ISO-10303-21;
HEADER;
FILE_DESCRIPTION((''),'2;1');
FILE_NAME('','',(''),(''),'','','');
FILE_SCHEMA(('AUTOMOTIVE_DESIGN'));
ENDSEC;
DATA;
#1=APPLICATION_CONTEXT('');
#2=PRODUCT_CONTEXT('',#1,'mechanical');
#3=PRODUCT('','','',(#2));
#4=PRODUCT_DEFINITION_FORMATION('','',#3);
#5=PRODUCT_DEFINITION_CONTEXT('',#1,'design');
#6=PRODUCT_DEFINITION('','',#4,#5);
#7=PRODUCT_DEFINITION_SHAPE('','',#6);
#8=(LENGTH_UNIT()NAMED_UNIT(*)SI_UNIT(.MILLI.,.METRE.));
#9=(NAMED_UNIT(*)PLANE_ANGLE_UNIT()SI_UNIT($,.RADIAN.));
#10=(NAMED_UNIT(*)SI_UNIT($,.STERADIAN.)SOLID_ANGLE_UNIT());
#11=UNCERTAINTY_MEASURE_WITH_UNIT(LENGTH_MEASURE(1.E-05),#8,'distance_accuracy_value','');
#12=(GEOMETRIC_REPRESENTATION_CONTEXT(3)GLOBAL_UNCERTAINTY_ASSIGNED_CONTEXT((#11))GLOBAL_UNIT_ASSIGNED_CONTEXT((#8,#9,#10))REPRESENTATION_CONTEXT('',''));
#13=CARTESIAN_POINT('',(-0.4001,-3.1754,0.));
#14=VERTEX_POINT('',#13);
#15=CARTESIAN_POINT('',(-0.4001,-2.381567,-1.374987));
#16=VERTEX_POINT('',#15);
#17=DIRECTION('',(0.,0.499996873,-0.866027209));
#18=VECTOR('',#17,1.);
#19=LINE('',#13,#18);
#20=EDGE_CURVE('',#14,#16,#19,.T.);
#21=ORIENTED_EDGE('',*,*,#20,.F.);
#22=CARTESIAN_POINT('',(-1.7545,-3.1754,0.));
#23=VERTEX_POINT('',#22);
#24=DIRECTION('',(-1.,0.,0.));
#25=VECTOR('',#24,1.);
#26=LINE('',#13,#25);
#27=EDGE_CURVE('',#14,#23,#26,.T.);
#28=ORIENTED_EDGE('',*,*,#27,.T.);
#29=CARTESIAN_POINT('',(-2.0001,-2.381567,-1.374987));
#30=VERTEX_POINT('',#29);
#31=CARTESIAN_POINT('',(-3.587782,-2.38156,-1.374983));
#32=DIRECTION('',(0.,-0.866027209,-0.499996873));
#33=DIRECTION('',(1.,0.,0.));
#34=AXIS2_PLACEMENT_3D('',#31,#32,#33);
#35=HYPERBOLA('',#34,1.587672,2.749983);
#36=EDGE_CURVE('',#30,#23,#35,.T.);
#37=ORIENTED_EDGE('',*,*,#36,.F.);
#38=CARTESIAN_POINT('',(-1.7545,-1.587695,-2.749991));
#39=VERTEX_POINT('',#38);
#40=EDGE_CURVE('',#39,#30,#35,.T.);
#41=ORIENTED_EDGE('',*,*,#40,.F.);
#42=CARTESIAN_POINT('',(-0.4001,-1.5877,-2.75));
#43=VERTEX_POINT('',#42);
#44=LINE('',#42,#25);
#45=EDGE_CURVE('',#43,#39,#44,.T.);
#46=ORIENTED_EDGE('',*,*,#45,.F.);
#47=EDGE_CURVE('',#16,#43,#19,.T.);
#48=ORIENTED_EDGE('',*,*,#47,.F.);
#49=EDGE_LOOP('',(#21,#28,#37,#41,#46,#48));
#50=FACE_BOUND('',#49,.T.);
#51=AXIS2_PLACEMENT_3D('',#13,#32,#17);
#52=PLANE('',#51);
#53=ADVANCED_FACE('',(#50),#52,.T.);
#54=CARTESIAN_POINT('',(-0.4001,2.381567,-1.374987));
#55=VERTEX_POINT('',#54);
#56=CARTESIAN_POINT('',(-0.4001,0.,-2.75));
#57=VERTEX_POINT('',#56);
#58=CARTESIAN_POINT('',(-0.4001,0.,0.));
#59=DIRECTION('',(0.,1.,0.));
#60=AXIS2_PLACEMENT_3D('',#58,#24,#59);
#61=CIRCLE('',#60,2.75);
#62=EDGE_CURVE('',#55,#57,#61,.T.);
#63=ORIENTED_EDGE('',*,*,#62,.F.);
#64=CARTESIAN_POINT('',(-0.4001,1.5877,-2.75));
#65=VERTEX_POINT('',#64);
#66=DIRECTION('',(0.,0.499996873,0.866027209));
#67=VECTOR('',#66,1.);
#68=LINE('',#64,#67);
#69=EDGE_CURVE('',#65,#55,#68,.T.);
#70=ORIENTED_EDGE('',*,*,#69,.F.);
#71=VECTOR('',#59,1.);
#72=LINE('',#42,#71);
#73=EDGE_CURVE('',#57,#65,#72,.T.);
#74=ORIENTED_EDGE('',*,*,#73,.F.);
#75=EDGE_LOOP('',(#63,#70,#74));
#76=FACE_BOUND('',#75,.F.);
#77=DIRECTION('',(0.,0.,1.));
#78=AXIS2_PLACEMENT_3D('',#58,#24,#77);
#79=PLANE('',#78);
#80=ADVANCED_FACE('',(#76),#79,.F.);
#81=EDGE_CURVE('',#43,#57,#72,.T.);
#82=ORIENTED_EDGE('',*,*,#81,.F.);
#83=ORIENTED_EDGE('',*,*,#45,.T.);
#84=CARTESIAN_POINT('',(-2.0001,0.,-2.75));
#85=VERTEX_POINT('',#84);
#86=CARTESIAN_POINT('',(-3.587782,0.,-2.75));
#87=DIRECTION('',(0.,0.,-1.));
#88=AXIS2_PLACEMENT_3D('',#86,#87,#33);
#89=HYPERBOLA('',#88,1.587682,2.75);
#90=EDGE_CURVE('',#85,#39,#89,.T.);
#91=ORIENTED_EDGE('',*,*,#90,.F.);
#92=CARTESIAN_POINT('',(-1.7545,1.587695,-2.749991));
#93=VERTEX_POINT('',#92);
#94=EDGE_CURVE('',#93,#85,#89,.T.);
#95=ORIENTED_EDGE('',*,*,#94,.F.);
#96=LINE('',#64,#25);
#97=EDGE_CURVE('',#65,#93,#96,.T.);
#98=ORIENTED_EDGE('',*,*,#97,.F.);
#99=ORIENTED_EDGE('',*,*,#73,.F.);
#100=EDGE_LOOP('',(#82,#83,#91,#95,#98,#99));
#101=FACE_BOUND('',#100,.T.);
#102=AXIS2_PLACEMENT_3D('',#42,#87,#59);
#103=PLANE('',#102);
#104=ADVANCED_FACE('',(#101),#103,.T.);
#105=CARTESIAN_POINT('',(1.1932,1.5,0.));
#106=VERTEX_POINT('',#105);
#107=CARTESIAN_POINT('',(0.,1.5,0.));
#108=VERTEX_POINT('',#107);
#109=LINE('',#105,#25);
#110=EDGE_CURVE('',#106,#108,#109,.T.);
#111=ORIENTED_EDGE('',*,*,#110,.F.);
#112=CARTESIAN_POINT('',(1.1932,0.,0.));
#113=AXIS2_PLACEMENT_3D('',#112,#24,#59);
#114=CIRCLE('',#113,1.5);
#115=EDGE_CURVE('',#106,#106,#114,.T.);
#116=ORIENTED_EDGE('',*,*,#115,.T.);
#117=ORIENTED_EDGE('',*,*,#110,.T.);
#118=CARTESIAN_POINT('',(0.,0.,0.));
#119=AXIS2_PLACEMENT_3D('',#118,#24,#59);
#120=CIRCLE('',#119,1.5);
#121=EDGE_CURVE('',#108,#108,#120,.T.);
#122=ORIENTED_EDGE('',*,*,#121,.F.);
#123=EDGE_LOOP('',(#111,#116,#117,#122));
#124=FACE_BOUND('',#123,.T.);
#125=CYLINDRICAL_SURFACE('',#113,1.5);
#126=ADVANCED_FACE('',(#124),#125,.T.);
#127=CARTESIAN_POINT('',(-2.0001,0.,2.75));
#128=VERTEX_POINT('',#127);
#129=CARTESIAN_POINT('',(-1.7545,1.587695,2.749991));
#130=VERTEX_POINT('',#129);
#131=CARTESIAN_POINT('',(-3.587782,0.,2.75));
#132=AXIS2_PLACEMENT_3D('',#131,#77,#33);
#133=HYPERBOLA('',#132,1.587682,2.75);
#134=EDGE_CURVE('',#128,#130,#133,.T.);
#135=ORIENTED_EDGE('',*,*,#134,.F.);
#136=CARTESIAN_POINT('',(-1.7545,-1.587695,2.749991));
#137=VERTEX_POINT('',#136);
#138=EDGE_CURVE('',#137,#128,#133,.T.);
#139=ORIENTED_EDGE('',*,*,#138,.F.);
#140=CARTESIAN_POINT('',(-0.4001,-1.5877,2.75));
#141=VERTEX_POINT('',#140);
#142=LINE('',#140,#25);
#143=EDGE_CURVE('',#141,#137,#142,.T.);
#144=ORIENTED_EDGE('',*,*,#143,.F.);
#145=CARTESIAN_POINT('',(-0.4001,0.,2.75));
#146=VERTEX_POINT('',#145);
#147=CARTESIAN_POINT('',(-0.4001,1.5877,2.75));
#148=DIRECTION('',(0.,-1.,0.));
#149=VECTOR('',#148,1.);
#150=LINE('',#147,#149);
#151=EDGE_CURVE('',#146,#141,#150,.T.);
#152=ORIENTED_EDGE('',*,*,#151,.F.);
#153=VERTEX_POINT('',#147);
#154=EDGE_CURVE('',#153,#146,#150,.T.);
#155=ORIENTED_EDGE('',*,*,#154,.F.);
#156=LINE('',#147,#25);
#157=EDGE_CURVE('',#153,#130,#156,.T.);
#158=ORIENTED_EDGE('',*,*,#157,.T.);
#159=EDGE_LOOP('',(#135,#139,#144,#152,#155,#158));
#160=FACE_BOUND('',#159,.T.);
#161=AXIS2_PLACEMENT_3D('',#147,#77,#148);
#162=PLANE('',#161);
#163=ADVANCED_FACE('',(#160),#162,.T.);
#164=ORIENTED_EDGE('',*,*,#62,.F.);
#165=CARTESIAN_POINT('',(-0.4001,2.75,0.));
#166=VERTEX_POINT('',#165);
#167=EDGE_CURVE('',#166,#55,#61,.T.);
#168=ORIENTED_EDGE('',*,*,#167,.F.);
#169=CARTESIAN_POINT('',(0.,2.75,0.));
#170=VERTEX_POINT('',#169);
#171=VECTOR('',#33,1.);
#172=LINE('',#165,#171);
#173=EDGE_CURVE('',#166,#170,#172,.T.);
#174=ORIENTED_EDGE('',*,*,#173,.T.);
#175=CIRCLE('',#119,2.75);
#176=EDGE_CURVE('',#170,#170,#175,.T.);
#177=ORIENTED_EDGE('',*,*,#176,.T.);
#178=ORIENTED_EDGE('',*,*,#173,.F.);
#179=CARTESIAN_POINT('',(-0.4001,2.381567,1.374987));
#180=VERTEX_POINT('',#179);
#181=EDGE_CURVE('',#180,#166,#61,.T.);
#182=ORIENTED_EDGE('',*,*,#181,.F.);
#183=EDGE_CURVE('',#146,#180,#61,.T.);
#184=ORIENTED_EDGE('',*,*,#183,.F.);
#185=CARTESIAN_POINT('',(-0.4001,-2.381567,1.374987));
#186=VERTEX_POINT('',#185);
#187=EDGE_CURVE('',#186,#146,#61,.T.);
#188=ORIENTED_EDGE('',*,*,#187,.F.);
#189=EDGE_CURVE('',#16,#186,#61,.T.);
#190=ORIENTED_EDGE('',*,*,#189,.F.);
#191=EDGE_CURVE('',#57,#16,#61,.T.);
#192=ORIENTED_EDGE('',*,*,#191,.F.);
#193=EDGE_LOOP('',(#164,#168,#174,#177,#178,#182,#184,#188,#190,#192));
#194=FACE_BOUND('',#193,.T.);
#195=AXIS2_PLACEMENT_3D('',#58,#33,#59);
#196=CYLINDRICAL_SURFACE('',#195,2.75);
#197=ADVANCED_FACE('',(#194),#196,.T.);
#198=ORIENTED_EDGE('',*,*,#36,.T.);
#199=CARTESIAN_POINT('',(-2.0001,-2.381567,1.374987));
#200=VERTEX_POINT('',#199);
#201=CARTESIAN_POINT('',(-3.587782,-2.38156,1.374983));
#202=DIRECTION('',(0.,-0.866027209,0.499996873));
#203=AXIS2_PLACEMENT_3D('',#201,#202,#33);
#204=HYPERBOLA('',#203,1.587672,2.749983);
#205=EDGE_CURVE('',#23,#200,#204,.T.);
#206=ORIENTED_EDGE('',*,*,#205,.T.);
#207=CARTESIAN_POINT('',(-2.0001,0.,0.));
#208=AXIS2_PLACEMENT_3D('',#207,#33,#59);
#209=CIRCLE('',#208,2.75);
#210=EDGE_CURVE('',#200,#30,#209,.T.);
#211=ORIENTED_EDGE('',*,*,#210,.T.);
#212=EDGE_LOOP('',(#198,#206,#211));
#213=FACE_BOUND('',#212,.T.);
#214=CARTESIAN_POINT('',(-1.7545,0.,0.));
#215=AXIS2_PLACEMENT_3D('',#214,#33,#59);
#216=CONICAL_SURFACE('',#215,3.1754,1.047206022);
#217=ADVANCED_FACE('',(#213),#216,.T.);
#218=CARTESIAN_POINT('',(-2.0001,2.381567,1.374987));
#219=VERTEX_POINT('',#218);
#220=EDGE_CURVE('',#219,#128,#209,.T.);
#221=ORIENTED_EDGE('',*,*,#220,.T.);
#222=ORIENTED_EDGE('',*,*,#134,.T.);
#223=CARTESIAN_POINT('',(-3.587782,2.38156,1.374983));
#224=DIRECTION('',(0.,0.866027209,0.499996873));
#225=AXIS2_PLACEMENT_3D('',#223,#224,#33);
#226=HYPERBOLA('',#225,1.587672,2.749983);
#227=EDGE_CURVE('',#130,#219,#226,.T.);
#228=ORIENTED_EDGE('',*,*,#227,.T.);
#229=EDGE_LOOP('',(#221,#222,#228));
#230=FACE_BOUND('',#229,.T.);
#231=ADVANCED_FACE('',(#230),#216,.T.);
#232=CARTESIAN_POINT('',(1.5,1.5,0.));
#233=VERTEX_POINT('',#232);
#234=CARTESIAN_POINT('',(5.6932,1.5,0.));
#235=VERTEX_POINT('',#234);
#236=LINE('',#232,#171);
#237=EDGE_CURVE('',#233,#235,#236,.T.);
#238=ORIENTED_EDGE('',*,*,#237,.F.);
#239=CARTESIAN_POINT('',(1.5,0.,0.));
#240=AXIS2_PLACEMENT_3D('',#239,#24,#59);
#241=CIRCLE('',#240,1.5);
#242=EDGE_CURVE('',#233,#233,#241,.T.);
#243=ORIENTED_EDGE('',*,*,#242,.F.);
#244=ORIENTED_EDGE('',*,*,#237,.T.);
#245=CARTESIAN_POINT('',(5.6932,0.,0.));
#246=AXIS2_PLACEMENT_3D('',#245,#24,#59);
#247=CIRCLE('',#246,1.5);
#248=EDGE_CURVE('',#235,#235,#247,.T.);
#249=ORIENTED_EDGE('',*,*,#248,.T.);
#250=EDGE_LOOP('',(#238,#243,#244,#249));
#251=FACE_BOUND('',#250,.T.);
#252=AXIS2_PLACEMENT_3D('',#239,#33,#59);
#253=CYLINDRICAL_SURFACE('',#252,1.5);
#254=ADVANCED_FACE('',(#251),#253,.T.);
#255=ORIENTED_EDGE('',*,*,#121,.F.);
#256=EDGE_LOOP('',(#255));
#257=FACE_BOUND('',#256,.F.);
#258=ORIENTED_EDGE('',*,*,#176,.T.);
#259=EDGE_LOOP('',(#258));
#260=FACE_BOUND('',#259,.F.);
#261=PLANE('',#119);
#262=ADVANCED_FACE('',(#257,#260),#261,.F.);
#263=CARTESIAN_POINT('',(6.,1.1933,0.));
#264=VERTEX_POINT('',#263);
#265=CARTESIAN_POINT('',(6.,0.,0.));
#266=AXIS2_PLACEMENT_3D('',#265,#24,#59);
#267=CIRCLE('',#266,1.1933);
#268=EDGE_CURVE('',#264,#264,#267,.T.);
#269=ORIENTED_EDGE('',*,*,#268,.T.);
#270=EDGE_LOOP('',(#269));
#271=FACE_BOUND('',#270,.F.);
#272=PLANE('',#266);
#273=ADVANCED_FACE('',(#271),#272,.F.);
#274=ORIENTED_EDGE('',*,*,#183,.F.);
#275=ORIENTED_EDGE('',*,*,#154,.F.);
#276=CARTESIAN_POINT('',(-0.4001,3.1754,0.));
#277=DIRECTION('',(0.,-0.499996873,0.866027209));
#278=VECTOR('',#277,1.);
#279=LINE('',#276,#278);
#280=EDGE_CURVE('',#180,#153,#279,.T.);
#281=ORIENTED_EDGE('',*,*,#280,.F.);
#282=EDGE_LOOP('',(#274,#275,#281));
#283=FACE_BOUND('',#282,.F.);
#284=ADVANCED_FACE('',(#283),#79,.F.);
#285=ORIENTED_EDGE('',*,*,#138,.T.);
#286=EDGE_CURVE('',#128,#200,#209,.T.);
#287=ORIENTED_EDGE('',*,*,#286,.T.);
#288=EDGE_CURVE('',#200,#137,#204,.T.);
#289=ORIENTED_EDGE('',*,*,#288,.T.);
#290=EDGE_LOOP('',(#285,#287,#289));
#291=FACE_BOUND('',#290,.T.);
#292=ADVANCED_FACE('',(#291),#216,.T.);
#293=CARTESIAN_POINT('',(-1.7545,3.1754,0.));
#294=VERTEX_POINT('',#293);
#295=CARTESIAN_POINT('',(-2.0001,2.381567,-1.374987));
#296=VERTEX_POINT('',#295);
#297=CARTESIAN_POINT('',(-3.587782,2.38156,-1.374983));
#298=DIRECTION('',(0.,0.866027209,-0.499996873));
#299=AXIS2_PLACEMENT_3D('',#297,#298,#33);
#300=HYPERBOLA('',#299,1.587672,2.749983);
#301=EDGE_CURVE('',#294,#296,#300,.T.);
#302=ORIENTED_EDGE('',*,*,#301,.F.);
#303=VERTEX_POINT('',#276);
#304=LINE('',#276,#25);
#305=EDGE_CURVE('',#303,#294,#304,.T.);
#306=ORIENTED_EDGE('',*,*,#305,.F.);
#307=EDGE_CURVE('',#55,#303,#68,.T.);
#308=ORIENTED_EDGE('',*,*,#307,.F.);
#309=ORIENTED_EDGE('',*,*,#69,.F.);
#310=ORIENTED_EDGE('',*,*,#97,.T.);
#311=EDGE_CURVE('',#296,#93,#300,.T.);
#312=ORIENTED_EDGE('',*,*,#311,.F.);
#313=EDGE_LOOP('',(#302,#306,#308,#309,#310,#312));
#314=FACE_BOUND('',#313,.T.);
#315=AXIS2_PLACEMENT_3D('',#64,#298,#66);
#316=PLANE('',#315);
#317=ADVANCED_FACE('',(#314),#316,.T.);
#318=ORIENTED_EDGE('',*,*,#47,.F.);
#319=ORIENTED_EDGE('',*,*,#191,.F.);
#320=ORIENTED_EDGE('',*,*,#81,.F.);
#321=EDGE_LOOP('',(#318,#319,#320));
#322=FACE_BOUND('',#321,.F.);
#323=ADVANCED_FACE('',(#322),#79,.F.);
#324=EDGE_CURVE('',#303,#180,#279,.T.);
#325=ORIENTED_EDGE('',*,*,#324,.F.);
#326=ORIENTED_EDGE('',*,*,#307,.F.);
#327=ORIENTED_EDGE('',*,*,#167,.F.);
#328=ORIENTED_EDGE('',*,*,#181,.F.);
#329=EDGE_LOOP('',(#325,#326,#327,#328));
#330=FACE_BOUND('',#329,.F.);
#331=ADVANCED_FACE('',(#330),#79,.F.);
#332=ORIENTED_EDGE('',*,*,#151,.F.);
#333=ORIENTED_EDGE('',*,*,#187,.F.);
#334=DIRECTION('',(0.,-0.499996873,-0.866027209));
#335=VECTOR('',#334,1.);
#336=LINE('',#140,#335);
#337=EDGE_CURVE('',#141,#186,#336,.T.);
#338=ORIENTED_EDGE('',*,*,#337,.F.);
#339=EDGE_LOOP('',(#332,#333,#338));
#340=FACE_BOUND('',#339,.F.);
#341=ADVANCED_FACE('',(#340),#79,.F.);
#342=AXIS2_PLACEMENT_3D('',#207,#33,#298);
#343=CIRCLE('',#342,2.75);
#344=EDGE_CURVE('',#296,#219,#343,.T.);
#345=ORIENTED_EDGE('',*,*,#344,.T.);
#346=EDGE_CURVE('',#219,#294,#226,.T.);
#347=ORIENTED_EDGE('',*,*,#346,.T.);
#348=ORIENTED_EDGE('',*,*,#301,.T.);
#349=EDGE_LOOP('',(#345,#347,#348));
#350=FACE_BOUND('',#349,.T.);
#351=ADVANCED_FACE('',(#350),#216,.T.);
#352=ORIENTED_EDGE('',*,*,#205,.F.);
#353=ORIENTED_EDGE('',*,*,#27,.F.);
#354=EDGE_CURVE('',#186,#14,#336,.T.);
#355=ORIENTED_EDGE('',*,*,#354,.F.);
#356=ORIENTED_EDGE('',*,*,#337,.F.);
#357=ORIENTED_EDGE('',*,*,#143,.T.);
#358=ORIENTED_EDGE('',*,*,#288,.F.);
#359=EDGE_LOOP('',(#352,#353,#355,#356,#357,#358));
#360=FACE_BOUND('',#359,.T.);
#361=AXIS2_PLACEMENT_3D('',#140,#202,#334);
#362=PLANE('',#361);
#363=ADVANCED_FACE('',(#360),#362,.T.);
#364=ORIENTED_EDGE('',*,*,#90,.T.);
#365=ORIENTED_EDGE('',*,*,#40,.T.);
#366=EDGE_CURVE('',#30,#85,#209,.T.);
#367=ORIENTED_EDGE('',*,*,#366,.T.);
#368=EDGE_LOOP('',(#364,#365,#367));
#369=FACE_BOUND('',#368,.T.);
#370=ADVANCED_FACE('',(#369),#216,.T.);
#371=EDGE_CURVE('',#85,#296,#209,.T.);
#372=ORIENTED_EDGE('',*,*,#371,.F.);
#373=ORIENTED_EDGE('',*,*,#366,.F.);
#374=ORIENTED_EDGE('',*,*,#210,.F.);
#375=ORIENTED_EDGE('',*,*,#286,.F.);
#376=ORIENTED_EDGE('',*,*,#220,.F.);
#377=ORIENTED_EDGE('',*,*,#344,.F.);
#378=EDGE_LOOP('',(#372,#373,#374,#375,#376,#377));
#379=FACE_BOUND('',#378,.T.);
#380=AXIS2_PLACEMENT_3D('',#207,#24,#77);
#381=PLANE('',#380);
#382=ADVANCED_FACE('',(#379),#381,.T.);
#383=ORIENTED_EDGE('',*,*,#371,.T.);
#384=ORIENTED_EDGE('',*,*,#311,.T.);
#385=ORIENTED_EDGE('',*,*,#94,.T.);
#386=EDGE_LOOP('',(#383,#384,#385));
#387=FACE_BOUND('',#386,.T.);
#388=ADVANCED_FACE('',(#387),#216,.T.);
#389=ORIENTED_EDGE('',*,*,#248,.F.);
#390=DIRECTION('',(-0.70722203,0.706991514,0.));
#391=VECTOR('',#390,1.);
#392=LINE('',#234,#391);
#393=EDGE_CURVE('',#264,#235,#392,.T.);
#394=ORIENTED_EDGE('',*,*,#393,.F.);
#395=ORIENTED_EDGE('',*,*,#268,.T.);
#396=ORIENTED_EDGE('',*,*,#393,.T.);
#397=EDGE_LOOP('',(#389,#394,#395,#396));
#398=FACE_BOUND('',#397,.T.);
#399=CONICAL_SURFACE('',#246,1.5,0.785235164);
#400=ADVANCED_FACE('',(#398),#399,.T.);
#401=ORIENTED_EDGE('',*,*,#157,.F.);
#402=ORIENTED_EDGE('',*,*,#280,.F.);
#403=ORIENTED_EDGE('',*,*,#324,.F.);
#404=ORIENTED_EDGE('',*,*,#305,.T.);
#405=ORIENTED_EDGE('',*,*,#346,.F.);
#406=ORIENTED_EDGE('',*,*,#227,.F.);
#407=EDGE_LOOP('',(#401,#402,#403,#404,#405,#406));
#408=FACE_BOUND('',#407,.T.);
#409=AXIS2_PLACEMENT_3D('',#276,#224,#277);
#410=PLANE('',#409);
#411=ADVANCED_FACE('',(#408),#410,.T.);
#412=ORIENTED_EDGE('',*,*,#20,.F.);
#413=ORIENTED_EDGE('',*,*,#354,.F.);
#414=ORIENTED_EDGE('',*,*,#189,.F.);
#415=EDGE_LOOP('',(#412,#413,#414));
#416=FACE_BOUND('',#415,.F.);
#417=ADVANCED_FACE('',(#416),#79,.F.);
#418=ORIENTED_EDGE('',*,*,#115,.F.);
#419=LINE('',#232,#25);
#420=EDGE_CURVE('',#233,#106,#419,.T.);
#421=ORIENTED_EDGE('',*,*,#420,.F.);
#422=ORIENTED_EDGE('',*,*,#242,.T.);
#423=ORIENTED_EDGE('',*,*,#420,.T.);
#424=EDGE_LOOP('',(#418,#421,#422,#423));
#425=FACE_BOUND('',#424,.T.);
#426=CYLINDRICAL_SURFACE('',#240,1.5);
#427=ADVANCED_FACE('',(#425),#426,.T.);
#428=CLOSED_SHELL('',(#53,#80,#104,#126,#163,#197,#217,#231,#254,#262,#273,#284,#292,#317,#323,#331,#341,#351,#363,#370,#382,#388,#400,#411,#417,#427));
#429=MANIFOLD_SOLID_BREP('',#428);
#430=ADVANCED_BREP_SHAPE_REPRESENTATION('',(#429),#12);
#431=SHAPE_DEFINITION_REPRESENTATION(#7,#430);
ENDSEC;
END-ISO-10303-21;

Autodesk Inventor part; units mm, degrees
ref_plane "YZ Plane" through (0, 0, 0) normal (1, 0, 0) x (0, 1, 0)
ref_plane "XZ Plane" through (0, 0, 0) normal (0, 1, 0) x (-1, 0, 0)
sketch "Sketch1" plane through (0, 0, 0) normal (0, 0, 1) x (1, 0, 0)
  line L0 (0, 2.75) -> (0, 1.5)
  line L1 (1.5, 1.5) -> (6, 1.5)
  line L2 (6, 1.5) -> (6, 0)
  line L3 (6, 0) -> (-0.4001, 0)
  line L4 (-1.6801, 0) -> (7.28, 0) projected
  line L5 (-0.4001, 0) -> (-0.4001, 2.75)
  line L6 (-0.4001, 2.75) -> (0, 2.75)
  line L7 (1.5, 1.5) -> (1.1932, 1.5)
  line L8 (1.1932, 1.5) -> (0, 1.5)
  line L9 (0, -0.55) -> (0, 3.3) projected
  dimension "d0" = 6
  dimension "d1" = 4.5
  dimension "d2" = 3
  dimension "d9" = 0.4001
  dimension "d10" = 5.5
  dimension "d13" = 0.3068
  dimension "d14" = 3
revolve "Body" add sketch "Sketch1" angle 360 about axis through (6, 0, 0) along (-1, 0, 0)
sketch "Sketch2" plane through (-0.4001, 0, 0) normal (-1, 0, 0) x (0, 0, 1)
  line L0 (0, 3.1754) -> (2.75, 1.5877)
  line L1 (2.75, 1.5877) -> (2.75, -1.5877)
  line L2 (2.75, -1.5877) -> (0, -3.1754)
  line L3 (0, -3.1754) -> (-2.75, -1.5877)
  line L4 (-2.75, -1.5877) -> (-2.75, 1.5877)
  line L5 (-2.75, 1.5877) -> (0, 3.1754)
  point P0 (0, 0)
  point P1 (0, 0)
  dimension "d11" = 5.5
extrude "Head" add sketch "Sketch2" along normal blind 1.6
sketch "Sketch4" plane through (0, 0, 0) normal (0, 0, 1) x (1, 0, 0)
  line L0 (-2.0001, 2.75) -> (-2.0001, 3.1754)
  line L1 (-2.0001, 3.1754) -> (-1.7545, 3.1754)
  line L2 (-1.7545, 3.1754) -> (-2.0001, 2.75)
  line L3 (-2.3201, 0) -> (-0.0801, 0) projected
  line L4 (-0.4001, 3.1754) -> (-2.0001, 3.1754) projected
  line L5 (-2.0001, 1.5877) -> (-2.0001, 3.1754) projected
  dimension "d5" = 30
  dimension "d19" = 5.5
revolve "Chamfer1" cut sketch "Sketch4" angle 360 about axis through (-10, 0, 0) along (1, 0, 0)
thread "Thread" size "M3x0.5" class "6g" standard "ISO Metric profile" length 4.5
chamfer "Chamfer2" distance 0.3067 distance2 0.3068 1 edges at (6, -1.5, 0) measured on face at (6, 0.5, -0.823)
ref_plane "Work Plane1" through (1.525, 0, 0) normal (0, 0, 1) x (1, 0, 0)
equation "\"d0\" = NLG"
equation "\"d1\" = GEL"
equation "\"d2\" = GD"
equation "\"d10\" = SD2"
equation "\"d14\" = BDM"
equation "\"d11\" = SW"
equation "\"d3\" = KOH - SD"
equation "\"d5\" = ANG1"
equation "\"d19\" = SW0"
equation "\"d15\" = GEL"
equation "\"d6\" = -0.5 * SPD + 0.5 * GD"
equation "\"NLG\" = 6"
equation "\"GD\" = NND"
equation "\"BDM\" = NND"
equation "\"KOH\" = 2"
equation "\"GEL\" = 4.5"
equation "\"SW\" = 5.5"
equation "\"SW0\" = SW"
equation "\"SPD\" = NND - 1.2269 * PTC"
equation "\"SD2\" = SW"
equation "\"SD\" = 0.4"
equation "\"ANG1\" = 30deg"
equation "\"GAL\" = 0.61345 * PTC"
equation "\"GUL\" = 0.61345 * PTC"
equation "\"RR\" = 0.1"
equation "\"WFT\" = SD"
equation "\"GD1\" = THREADDIA - 1.2269 * PTC"
equation "\"THREADDIA\" = 3"
equation "\"SDH\" = SW"
equation "\"TOA\" = 30deg"
equation "\"FAWI\" = 45deg"
equation "\"PTC\" = 0.5"
equation "\"NND\" = 3"
equation "\"E0\" = 1.155 * SW"
properties part number "AS 1110 - M3 x 6" material "Steel, Mild"
